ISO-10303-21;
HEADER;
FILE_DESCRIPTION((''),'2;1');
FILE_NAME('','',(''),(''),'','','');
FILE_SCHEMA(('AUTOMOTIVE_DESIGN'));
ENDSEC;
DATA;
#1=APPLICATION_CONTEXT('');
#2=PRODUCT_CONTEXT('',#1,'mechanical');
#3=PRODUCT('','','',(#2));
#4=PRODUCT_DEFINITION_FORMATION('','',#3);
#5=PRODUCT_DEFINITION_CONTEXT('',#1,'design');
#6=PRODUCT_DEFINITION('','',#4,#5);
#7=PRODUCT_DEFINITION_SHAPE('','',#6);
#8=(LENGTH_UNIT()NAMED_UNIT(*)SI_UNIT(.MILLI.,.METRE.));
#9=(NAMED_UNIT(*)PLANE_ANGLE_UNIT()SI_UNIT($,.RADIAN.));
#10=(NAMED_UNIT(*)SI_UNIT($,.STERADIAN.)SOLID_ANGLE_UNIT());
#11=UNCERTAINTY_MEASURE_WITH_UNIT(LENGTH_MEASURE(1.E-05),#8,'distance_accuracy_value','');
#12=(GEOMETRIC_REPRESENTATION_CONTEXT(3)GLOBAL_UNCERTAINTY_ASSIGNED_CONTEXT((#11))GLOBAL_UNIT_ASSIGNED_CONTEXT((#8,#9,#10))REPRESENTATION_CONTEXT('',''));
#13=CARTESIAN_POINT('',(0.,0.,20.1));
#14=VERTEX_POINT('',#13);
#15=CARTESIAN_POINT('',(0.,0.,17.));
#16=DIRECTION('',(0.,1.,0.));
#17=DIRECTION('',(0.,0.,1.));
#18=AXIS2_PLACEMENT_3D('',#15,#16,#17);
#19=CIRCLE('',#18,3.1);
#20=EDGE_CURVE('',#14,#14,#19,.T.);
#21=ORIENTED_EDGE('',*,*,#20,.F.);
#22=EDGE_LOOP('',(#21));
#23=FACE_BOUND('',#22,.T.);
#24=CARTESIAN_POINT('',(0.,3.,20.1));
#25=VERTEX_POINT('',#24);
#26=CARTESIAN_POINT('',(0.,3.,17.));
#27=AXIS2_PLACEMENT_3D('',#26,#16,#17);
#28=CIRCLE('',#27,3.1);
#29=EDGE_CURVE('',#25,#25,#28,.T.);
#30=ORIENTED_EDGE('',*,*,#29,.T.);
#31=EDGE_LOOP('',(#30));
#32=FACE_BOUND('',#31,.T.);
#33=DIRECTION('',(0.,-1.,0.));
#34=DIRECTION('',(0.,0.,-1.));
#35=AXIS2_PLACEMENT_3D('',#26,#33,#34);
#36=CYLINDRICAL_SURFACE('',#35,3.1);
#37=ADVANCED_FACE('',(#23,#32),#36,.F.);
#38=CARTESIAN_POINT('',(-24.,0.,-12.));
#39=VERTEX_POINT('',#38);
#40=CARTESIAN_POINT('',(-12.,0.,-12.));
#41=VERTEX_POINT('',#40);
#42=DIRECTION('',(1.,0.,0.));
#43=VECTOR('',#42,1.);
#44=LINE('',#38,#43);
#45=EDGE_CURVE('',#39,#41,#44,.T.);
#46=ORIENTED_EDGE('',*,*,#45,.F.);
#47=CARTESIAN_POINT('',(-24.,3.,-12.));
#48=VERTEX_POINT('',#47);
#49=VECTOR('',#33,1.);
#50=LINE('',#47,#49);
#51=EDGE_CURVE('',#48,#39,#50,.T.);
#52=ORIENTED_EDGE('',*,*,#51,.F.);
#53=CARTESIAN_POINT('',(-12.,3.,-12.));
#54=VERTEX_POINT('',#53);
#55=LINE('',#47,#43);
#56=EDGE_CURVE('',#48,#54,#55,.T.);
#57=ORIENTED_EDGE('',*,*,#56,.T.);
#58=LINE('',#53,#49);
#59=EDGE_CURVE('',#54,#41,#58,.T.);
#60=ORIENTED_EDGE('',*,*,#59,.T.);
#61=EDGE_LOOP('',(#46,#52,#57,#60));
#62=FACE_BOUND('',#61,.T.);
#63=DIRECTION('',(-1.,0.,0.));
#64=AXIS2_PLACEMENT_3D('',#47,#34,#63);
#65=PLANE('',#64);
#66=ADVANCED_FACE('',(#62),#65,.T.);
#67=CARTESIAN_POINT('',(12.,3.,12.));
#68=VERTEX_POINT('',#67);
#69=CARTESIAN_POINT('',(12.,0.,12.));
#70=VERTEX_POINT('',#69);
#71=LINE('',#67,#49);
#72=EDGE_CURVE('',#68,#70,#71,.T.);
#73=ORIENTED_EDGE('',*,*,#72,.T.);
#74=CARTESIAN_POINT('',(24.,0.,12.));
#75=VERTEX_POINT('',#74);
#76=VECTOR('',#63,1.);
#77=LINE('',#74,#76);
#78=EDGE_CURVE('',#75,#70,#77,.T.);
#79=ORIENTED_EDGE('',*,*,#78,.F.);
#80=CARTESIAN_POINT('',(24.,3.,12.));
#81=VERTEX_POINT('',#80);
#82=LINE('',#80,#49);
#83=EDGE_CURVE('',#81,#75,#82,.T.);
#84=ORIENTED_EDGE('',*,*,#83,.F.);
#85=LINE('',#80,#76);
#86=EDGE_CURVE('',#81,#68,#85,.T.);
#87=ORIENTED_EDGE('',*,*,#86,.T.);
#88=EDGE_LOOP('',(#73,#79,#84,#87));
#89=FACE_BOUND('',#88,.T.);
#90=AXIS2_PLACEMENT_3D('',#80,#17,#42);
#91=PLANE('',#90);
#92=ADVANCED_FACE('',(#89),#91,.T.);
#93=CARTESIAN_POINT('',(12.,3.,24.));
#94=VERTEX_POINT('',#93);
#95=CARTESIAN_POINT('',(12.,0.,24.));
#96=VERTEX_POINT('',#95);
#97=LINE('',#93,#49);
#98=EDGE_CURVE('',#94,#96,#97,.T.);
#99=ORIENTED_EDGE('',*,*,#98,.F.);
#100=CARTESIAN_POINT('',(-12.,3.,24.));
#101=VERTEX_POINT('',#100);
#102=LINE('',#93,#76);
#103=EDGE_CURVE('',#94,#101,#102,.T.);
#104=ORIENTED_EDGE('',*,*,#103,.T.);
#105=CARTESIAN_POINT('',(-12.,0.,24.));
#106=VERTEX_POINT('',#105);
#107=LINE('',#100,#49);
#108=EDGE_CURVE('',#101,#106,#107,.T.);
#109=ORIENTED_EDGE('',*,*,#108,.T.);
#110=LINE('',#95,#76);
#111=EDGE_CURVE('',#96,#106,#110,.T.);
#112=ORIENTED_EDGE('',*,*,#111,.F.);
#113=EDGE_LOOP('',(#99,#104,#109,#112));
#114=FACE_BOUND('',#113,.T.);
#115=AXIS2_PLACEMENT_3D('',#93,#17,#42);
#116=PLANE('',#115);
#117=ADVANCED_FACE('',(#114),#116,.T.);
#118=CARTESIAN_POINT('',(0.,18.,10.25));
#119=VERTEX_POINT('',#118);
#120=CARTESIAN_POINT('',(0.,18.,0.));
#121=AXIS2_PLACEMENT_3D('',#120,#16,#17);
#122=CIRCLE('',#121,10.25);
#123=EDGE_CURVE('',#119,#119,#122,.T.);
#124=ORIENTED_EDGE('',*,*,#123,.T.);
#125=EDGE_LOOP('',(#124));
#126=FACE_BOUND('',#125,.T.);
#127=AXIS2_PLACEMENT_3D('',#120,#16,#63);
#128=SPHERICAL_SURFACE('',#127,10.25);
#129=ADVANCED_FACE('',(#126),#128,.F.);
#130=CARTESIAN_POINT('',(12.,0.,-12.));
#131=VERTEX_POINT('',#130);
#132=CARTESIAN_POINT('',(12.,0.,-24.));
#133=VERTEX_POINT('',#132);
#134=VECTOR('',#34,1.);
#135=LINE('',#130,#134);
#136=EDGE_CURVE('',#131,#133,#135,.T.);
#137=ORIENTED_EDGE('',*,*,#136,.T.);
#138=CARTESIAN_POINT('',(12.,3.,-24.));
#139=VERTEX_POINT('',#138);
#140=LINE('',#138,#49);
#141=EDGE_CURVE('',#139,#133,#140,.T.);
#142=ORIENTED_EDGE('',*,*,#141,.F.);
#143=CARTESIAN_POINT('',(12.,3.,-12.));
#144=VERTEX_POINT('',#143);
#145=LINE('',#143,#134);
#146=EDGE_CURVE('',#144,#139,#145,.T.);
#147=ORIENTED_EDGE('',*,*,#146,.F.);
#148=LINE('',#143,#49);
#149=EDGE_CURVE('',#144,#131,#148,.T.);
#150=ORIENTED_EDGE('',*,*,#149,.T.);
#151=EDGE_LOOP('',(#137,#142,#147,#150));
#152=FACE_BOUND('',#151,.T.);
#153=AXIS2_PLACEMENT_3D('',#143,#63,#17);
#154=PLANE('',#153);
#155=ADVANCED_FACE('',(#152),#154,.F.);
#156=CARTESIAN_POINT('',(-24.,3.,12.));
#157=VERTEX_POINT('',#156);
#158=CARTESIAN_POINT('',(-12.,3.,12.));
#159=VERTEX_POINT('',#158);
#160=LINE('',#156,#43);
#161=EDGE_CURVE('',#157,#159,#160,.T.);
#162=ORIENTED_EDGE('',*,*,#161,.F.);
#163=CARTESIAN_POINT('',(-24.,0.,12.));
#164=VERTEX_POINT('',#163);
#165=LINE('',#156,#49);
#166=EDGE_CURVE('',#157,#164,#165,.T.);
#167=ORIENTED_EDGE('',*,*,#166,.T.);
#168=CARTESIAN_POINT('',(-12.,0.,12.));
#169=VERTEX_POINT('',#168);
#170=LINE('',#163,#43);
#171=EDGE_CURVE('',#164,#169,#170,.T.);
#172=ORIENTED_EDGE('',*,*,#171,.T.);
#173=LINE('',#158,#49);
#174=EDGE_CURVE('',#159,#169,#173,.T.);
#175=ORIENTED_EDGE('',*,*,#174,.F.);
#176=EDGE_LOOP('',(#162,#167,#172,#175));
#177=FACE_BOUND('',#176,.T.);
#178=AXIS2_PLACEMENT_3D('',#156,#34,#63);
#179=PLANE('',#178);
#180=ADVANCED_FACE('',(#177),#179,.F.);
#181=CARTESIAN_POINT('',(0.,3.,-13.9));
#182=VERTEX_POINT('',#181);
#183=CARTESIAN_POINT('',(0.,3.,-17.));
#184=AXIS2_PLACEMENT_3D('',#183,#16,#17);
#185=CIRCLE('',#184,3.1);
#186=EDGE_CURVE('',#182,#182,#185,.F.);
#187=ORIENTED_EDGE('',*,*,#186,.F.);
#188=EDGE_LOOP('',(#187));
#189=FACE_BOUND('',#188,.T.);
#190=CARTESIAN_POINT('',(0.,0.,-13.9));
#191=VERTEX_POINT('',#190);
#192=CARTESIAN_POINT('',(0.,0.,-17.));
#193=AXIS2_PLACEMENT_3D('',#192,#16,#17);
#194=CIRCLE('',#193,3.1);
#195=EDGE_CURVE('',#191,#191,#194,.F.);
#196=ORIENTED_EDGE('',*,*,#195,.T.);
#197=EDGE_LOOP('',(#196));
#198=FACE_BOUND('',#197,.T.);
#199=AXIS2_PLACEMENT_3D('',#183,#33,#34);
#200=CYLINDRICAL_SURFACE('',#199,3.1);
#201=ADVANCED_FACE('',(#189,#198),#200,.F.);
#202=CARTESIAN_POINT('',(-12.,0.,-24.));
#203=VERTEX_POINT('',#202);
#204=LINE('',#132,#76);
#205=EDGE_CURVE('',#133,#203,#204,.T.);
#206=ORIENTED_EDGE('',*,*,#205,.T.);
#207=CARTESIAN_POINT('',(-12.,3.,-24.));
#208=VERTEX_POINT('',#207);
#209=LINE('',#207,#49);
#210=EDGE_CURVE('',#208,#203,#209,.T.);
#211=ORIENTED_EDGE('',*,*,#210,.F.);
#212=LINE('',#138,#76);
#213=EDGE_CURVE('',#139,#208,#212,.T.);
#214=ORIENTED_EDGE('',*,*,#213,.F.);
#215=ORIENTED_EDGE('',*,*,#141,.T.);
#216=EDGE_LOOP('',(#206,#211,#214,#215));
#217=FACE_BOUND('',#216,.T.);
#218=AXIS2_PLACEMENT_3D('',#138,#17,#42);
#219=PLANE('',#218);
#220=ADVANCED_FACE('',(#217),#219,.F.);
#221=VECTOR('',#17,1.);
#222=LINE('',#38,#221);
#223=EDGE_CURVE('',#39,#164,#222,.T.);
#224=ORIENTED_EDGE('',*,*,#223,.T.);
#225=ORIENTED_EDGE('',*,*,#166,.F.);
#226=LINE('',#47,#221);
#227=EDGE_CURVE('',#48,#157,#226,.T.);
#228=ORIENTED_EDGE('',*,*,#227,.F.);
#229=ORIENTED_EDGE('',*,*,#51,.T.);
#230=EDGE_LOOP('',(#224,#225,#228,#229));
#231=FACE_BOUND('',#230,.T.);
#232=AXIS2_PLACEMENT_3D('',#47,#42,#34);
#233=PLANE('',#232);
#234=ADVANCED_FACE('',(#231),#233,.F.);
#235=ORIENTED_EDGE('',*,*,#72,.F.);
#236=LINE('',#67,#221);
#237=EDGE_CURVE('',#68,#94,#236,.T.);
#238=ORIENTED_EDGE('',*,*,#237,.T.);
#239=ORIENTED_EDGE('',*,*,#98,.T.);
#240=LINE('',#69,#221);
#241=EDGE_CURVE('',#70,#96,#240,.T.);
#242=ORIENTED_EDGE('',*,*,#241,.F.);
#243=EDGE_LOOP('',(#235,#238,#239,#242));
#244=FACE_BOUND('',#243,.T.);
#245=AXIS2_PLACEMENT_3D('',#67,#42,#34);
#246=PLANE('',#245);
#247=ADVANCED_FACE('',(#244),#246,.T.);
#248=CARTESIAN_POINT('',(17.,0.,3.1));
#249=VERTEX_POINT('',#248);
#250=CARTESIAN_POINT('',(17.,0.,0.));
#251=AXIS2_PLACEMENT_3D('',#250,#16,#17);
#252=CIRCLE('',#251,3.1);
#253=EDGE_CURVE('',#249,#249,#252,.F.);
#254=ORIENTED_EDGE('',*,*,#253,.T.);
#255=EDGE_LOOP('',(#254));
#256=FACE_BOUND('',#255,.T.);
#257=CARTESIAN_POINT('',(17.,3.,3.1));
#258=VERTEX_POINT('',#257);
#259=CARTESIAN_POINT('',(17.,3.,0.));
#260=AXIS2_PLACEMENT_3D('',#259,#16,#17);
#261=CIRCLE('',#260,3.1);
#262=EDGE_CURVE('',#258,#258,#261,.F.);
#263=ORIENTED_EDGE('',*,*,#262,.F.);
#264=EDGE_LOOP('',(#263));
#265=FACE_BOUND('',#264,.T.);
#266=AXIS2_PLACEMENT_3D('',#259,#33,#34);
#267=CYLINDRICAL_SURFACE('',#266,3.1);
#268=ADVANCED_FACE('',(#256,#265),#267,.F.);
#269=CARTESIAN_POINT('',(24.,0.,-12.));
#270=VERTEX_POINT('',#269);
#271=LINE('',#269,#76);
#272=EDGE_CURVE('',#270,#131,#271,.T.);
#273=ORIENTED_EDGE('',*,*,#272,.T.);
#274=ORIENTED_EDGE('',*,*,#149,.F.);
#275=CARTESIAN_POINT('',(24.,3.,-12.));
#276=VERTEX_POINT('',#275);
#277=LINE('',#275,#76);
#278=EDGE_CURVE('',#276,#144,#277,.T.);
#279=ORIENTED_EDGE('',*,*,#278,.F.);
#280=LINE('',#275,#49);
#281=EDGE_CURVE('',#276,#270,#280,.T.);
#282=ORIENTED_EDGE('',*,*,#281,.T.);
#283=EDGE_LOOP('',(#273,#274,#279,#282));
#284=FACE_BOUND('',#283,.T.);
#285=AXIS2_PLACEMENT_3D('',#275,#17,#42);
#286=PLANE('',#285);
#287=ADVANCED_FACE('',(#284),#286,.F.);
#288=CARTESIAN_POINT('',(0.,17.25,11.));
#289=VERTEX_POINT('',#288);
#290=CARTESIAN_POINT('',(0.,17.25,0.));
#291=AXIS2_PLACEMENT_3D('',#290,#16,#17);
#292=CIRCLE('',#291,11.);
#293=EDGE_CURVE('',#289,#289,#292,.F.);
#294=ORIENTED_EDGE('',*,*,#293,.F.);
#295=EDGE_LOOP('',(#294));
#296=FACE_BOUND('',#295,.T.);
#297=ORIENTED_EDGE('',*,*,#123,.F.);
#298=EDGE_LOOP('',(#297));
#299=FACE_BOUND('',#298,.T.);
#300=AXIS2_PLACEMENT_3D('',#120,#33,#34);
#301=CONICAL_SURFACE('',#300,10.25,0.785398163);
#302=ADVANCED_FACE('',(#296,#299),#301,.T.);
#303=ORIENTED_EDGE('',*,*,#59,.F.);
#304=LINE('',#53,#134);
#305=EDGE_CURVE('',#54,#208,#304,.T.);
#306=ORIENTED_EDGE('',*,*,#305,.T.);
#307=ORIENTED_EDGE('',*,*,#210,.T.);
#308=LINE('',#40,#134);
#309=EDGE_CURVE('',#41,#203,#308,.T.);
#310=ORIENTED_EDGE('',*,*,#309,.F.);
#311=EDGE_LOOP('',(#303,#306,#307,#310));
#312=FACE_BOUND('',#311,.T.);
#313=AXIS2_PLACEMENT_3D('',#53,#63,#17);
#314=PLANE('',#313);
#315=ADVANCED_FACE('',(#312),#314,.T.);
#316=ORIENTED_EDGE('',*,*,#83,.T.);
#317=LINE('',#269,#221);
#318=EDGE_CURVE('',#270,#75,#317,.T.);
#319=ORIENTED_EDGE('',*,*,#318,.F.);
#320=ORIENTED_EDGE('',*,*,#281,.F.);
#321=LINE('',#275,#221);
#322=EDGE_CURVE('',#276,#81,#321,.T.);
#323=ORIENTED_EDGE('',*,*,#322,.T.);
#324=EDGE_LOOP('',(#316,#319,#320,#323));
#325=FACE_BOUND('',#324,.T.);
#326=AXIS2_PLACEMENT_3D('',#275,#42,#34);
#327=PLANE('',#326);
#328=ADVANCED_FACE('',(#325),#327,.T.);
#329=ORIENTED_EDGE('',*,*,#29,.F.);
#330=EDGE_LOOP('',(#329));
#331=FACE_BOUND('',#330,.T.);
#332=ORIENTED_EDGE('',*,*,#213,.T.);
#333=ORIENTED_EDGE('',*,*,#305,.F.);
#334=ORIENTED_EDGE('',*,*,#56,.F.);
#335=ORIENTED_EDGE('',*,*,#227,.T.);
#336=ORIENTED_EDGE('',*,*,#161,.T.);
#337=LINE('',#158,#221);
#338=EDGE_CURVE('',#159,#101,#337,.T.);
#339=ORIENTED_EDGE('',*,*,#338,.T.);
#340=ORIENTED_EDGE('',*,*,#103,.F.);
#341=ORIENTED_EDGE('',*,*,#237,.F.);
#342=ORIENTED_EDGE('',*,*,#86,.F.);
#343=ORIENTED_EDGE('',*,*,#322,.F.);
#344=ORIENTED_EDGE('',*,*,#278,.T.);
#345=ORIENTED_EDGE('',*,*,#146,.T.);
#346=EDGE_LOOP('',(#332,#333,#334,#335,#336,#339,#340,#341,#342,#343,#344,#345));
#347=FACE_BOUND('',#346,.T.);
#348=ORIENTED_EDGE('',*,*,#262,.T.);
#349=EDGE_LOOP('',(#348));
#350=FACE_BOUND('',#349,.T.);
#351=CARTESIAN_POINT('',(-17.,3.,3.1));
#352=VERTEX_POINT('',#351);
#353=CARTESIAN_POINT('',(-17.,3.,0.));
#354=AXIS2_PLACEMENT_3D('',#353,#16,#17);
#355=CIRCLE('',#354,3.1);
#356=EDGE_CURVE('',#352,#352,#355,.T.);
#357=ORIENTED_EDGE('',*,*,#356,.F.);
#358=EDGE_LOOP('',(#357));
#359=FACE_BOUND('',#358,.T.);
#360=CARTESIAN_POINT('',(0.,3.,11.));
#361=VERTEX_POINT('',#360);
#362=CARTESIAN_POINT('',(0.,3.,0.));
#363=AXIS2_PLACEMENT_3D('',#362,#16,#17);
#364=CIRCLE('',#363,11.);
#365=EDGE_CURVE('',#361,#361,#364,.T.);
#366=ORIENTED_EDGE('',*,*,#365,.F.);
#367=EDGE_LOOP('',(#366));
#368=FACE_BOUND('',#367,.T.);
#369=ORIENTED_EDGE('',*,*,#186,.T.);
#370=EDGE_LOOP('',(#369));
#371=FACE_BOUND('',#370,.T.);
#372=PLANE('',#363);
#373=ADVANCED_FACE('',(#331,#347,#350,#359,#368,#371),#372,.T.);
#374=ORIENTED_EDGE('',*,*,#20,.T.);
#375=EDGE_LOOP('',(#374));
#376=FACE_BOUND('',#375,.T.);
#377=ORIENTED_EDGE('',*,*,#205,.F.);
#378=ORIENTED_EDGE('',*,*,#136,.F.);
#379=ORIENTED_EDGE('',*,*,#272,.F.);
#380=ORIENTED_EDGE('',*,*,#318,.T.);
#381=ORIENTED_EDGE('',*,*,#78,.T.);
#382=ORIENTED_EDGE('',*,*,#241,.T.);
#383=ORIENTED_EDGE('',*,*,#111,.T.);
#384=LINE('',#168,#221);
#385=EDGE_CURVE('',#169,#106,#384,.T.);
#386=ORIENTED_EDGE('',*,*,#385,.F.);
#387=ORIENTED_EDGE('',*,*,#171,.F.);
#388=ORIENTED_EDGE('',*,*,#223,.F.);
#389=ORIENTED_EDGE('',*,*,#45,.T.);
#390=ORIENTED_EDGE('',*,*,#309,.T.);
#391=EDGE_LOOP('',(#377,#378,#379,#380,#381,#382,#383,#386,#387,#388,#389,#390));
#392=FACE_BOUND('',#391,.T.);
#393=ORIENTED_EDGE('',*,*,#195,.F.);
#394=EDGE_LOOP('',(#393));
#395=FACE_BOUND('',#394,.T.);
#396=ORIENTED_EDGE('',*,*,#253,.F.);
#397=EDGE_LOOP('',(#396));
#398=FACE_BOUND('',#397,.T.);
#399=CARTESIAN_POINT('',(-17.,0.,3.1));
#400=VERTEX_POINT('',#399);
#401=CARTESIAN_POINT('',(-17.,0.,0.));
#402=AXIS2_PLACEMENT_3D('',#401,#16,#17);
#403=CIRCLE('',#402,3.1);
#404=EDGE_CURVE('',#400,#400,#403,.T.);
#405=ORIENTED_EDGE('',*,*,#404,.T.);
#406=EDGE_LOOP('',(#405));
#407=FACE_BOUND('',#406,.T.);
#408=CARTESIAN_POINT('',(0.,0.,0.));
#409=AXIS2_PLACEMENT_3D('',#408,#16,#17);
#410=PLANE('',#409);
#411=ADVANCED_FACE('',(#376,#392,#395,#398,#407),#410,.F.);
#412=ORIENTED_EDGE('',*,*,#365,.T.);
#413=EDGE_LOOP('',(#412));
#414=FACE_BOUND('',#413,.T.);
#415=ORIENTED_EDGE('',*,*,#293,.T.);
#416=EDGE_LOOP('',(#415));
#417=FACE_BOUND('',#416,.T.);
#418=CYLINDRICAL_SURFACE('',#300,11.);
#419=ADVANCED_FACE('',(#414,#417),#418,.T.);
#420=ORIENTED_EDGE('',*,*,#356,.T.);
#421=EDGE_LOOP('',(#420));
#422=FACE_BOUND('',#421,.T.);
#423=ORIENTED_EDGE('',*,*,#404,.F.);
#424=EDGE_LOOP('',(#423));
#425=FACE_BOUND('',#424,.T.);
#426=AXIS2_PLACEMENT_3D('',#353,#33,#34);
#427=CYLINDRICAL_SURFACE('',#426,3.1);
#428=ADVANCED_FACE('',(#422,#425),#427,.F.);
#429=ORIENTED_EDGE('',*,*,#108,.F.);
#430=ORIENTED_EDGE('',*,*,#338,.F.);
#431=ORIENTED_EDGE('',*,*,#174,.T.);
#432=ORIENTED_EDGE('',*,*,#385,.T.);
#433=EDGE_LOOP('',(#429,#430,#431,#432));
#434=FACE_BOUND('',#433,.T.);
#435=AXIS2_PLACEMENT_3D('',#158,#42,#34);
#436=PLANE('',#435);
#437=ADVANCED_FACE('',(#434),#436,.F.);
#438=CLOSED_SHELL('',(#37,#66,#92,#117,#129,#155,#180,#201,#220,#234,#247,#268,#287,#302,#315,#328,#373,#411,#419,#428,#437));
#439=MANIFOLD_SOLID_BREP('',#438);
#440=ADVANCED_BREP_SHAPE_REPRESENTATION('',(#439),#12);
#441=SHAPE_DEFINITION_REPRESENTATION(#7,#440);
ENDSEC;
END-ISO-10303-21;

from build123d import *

# Parameters (mm, degrees)
SKETCH1_R           = 3.1
BOSS_EXTRUDE1_DEPTH = 3
BOSS_EXTRUDE2_START = 3
SKETCH1_5_R         = 11
BOSS_EXTRUDE2_DEPTH = 15
CHAMFER1_SIZE       = 0.75


with BuildPart() as part:
    # Sketch1 → Boss-Extrude1 (new body)
    with BuildSketch(Plane(origin=(0, 0, 0), x_dir=(1, 0, 0), z_dir=(0, 1, 0))):
        Polygon((24, 12), (24, -12), (12, -12), (12, -24), (-12, -24), (-12, -12), (-24, -12), (-24, 12), (-12, 12), (-12, 24), (12, 24), (12, 12), align=None)
        with Locations(Location((17, 0, 0), (0, 0, 270))):
            Circle(SKETCH1_R, mode=Mode.SUBTRACT)
        with Locations(Location((0, -17, 0), (0, 0, 270))):
            Circle(SKETCH1_R, mode=Mode.SUBTRACT)
        with Locations(Location((0, 17, 0), (0, 0, 270))):
            Circle(SKETCH1_R, mode=Mode.SUBTRACT)
        with Locations(Location((-17, 0, 0), (0, 0, 270))):
            Circle(SKETCH1_R, mode=Mode.SUBTRACT)
    extrude(amount=BOSS_EXTRUDE1_DEPTH)

    # Sketch1<5> → Boss-Extrude2 (add)
    with BuildSketch(Plane(origin=(0, 0, 0), x_dir=(1, 0, 0), z_dir=(0, 1, 0)).offset(BOSS_EXTRUDE2_START)):
        with Locations(Location((0, 0, 0), (0, 0, 270))):
            Circle(SKETCH1_5_R)
    extrude(amount=BOSS_EXTRUDE2_DEPTH)

    # Sketch3 → Cut-Revolve3 (revolve, cut)
    with BuildSketch(Plane.XY, mode=Mode.PRIVATE) as cut_revolve3_sk:
        with BuildLine():
            Line((0, 18), (10.25, 18))
            ThreePointArc((10.25, 18), (7.247844507, 10.752155493), (0, 7.75))
            Line((0, 7.75), (0, 18))
        make_face()
    revolve(cut_revolve3_sk.sketch.rotate(Axis((0, 18, 0), (0, -1, 0)), 180), axis=Axis((0, 18, 0), (0, -1, 0)), mode=Mode.SUBTRACT)

    # Chamfer1
    chamfer1_edges = [part.edges().sort_by_distance(p)[0] for p in [
        (0, 18, -11),
    ]]
    chamfer(chamfer1_edges, length=CHAMFER1_SIZE - 0.0001)  # a hair under: the kernel refuses the full size


solid = part.part
